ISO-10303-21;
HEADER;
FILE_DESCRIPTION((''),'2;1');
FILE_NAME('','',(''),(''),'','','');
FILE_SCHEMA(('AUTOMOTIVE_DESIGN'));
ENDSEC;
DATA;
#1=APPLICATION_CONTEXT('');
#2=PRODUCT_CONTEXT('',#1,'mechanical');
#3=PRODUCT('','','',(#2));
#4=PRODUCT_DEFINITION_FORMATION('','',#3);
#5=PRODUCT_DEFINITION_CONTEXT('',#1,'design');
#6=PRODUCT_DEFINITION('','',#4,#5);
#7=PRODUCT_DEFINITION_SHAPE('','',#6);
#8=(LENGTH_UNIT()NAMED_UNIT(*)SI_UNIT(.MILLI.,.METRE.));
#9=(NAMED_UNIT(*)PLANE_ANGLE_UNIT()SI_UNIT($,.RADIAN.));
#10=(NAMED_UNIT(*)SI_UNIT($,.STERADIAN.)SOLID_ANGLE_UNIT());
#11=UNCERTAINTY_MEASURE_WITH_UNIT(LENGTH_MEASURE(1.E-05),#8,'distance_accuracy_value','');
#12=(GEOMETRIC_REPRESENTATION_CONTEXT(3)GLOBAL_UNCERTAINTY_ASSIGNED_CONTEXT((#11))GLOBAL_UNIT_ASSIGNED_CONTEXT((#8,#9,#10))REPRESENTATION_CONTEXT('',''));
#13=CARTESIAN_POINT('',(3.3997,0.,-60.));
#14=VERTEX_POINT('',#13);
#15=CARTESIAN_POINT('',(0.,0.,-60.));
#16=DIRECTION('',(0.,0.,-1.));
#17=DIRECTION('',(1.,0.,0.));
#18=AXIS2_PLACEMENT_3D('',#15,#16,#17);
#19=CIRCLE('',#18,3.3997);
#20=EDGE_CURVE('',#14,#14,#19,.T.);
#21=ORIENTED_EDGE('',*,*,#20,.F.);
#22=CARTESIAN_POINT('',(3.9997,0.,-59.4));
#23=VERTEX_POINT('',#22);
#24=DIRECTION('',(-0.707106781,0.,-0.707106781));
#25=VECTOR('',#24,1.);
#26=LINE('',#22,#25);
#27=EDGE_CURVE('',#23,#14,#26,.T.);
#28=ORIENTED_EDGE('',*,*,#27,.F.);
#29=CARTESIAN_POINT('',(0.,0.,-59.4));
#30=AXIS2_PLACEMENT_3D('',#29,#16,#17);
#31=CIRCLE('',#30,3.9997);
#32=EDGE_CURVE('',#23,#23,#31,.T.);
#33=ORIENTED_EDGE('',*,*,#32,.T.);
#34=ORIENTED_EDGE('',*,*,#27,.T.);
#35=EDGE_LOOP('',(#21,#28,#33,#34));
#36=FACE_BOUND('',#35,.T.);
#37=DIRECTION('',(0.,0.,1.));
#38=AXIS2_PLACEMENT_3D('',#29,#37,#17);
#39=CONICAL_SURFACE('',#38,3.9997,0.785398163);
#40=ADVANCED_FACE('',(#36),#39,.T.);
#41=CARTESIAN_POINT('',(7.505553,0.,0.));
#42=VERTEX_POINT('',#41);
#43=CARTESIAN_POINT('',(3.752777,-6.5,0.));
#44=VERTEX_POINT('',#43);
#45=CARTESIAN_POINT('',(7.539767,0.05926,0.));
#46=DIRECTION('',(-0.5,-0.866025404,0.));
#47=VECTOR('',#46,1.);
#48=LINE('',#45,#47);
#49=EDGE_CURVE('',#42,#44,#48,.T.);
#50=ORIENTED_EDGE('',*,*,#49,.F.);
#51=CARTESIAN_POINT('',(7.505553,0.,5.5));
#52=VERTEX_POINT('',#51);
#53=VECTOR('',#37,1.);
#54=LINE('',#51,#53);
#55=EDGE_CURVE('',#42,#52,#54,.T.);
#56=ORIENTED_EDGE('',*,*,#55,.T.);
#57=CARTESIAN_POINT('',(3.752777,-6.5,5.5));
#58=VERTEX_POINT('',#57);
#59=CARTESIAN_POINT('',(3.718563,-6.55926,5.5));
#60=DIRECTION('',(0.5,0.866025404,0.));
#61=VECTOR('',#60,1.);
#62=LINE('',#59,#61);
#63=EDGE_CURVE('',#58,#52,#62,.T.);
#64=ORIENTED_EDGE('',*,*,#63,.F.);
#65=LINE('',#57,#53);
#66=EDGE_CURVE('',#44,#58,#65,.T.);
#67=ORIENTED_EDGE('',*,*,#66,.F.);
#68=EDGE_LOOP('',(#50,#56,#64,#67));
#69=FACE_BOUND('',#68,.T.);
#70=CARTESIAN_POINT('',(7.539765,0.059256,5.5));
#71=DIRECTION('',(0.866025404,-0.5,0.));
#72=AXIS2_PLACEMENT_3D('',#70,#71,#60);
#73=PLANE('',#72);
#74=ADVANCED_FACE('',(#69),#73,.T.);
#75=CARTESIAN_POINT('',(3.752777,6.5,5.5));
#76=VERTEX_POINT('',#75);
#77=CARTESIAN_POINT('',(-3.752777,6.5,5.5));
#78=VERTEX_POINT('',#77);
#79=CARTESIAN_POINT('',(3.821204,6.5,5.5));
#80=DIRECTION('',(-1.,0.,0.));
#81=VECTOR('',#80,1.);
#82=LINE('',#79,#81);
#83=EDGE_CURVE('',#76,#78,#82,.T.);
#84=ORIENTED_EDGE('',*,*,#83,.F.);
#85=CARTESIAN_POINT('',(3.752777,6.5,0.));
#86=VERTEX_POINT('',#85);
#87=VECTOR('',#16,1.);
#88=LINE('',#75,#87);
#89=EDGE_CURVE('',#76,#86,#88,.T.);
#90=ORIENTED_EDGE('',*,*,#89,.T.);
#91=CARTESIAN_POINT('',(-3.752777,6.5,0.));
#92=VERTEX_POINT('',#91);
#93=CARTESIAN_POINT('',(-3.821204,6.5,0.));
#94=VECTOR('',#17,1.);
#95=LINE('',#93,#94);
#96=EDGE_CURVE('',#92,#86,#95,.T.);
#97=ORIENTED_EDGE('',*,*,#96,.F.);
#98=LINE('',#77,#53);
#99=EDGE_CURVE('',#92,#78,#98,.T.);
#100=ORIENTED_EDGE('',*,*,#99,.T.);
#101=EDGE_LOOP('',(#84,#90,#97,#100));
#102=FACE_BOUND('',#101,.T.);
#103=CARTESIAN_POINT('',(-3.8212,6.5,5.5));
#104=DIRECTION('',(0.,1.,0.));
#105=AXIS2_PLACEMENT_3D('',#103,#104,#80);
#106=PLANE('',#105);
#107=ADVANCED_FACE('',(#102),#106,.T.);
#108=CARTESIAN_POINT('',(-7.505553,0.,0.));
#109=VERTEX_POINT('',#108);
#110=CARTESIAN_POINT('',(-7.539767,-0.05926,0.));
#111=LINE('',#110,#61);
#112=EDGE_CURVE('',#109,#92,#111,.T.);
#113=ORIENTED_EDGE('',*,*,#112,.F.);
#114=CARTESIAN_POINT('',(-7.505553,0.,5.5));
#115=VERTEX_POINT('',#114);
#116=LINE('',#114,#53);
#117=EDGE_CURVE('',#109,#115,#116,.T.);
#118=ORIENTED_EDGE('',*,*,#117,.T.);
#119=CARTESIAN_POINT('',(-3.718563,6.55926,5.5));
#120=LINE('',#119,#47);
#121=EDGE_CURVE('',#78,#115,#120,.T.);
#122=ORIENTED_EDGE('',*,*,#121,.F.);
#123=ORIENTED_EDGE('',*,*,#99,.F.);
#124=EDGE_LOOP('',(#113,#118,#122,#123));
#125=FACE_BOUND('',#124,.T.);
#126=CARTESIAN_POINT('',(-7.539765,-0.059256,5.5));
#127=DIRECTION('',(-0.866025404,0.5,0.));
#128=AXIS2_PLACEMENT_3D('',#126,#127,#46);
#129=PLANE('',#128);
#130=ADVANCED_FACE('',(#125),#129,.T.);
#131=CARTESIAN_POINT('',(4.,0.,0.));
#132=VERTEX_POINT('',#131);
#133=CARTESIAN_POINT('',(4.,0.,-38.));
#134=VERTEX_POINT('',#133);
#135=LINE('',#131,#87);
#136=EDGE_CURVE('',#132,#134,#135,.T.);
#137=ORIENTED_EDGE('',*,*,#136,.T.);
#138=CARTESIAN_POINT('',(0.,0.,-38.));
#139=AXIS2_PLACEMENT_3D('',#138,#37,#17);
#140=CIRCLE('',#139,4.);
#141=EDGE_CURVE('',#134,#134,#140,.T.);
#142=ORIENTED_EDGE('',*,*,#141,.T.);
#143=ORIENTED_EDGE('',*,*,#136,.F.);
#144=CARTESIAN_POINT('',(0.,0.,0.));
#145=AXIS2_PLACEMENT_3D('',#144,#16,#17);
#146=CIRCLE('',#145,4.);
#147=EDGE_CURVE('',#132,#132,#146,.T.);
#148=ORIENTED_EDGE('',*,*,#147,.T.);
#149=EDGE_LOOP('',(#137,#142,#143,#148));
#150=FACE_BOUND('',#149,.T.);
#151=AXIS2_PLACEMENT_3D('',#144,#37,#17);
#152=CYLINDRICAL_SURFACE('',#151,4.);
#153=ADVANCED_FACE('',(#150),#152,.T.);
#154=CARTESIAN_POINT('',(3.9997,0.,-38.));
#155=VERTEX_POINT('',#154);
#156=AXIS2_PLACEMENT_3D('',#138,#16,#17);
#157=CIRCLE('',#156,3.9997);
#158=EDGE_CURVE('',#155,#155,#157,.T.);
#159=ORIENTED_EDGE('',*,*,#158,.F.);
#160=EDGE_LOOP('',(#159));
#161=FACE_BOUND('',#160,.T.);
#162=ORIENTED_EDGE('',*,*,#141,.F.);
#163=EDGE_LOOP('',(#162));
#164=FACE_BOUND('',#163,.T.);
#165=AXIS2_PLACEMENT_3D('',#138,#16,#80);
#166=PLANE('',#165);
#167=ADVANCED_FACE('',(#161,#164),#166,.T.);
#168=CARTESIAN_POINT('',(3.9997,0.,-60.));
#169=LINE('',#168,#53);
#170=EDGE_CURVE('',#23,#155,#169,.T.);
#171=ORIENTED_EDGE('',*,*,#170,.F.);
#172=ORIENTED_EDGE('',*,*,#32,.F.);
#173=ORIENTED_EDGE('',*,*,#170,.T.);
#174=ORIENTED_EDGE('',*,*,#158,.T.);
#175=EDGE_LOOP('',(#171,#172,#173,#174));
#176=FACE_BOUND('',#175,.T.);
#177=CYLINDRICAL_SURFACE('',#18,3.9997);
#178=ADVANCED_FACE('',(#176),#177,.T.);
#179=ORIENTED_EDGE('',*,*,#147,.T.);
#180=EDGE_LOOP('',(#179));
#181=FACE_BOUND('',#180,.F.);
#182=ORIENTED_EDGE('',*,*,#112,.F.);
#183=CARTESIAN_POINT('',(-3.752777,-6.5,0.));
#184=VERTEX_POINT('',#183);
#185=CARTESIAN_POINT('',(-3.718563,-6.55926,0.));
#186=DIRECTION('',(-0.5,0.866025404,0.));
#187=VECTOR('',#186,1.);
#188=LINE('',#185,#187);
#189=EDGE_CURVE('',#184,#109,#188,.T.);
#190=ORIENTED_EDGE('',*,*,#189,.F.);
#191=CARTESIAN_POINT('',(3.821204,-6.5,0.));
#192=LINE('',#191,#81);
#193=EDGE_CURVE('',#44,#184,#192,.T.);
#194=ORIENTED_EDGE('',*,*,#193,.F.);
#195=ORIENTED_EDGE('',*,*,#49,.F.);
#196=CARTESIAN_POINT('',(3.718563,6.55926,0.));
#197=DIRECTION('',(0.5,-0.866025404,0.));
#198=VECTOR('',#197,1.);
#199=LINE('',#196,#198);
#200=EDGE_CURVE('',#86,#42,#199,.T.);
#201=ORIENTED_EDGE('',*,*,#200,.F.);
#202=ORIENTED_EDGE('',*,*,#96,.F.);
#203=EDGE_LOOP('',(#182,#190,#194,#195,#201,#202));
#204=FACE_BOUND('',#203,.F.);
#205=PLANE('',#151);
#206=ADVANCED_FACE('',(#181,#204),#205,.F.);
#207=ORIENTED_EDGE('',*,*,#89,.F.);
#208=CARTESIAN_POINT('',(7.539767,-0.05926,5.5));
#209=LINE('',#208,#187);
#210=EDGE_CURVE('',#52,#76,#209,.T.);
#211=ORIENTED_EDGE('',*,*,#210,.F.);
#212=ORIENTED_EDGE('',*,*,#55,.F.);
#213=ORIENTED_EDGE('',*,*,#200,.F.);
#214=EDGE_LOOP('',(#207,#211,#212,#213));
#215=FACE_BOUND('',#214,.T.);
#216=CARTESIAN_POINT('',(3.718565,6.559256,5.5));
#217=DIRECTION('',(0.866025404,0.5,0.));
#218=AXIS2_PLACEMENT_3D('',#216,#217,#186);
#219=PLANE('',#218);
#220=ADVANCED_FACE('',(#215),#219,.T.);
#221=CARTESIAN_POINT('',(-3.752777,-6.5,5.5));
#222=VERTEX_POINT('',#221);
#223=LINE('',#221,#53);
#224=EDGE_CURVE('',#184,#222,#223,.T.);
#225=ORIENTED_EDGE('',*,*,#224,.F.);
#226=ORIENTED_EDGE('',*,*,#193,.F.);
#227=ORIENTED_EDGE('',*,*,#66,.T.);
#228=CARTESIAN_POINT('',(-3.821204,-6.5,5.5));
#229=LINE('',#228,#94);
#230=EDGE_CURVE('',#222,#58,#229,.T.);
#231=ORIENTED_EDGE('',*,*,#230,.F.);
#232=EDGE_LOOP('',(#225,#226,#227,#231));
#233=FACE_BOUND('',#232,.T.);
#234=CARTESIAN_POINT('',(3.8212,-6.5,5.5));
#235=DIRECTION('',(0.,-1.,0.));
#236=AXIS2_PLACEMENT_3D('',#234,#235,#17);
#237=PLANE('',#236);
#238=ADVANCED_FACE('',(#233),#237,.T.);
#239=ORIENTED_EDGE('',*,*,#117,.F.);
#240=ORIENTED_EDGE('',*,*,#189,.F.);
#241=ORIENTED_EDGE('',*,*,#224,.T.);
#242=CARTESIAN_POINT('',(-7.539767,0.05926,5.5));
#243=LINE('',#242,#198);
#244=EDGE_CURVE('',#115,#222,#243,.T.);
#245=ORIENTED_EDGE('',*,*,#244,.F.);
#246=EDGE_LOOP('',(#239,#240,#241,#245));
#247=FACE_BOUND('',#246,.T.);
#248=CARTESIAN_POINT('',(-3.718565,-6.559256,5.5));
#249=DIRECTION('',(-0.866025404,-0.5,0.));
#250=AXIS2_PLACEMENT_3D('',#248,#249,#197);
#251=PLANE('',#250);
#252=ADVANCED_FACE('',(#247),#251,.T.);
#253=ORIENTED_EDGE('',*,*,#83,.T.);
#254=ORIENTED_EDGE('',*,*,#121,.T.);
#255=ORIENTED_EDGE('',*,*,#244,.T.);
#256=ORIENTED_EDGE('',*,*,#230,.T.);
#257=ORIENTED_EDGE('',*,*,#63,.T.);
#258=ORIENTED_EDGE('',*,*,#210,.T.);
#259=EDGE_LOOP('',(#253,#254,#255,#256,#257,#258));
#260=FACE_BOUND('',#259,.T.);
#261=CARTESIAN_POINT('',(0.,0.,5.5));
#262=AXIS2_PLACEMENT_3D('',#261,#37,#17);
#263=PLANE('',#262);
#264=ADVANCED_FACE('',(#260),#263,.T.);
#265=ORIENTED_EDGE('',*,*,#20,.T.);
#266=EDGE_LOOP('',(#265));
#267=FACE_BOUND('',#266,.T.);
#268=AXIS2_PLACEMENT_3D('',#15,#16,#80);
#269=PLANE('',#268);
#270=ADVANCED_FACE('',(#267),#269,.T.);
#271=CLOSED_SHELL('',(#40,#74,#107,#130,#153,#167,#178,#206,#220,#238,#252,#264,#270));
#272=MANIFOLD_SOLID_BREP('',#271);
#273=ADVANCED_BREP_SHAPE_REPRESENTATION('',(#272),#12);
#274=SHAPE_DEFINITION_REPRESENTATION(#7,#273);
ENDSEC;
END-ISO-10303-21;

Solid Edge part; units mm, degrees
sketch "Sketch1" plane through (0, 0, 0) normal (0, 0, 1) x (1, 0, 0)
  circle A0 centre (0, 0) radius 7.54
  dimension "D1" = 15.08
extrude "Protrusion1" add sketch "Sketch1" along normal blind 5.5
sketch "Sketch2" plane through (0, 0, 0) normal (0, 0, -1) x (1, 0, 0)
  circle A0 centre (0, 0) radius 4
extrude "Protrusion2" add sketch "Sketch2" along normal blind 60
sketch "Sketch3" plane through (0, 0, -60) normal (0, 0, -1) x (1, 0, 0)
  circle A0 centre (0, 0) radius 3.9997
extrude "Cutout1" cut sketch "Sketch3" against normal blind 22 flip side to cut
chamfer "Chamfer_1" distance 0.6 angle 45 1 edges at (-3.9997, 0, -60)
sketch "Sketch4" plane through (0, 0, 5.5) normal (0, 0, 1) x (1, 0, 0)
  line L0 (-3.8212, 6.5) -> (3.8212, 6.5)
  dimension "D1" = 13
extrude "Cutout2" cut sketch "Sketch4" against normal up to next material side at (0, 6.55, 5.5)
pattern_circular "Pattern1" count 6 over 360 about axis through (0, 0, 5.5) along (0, 0, 1) of "Cutout2"
properties part number "117587"
